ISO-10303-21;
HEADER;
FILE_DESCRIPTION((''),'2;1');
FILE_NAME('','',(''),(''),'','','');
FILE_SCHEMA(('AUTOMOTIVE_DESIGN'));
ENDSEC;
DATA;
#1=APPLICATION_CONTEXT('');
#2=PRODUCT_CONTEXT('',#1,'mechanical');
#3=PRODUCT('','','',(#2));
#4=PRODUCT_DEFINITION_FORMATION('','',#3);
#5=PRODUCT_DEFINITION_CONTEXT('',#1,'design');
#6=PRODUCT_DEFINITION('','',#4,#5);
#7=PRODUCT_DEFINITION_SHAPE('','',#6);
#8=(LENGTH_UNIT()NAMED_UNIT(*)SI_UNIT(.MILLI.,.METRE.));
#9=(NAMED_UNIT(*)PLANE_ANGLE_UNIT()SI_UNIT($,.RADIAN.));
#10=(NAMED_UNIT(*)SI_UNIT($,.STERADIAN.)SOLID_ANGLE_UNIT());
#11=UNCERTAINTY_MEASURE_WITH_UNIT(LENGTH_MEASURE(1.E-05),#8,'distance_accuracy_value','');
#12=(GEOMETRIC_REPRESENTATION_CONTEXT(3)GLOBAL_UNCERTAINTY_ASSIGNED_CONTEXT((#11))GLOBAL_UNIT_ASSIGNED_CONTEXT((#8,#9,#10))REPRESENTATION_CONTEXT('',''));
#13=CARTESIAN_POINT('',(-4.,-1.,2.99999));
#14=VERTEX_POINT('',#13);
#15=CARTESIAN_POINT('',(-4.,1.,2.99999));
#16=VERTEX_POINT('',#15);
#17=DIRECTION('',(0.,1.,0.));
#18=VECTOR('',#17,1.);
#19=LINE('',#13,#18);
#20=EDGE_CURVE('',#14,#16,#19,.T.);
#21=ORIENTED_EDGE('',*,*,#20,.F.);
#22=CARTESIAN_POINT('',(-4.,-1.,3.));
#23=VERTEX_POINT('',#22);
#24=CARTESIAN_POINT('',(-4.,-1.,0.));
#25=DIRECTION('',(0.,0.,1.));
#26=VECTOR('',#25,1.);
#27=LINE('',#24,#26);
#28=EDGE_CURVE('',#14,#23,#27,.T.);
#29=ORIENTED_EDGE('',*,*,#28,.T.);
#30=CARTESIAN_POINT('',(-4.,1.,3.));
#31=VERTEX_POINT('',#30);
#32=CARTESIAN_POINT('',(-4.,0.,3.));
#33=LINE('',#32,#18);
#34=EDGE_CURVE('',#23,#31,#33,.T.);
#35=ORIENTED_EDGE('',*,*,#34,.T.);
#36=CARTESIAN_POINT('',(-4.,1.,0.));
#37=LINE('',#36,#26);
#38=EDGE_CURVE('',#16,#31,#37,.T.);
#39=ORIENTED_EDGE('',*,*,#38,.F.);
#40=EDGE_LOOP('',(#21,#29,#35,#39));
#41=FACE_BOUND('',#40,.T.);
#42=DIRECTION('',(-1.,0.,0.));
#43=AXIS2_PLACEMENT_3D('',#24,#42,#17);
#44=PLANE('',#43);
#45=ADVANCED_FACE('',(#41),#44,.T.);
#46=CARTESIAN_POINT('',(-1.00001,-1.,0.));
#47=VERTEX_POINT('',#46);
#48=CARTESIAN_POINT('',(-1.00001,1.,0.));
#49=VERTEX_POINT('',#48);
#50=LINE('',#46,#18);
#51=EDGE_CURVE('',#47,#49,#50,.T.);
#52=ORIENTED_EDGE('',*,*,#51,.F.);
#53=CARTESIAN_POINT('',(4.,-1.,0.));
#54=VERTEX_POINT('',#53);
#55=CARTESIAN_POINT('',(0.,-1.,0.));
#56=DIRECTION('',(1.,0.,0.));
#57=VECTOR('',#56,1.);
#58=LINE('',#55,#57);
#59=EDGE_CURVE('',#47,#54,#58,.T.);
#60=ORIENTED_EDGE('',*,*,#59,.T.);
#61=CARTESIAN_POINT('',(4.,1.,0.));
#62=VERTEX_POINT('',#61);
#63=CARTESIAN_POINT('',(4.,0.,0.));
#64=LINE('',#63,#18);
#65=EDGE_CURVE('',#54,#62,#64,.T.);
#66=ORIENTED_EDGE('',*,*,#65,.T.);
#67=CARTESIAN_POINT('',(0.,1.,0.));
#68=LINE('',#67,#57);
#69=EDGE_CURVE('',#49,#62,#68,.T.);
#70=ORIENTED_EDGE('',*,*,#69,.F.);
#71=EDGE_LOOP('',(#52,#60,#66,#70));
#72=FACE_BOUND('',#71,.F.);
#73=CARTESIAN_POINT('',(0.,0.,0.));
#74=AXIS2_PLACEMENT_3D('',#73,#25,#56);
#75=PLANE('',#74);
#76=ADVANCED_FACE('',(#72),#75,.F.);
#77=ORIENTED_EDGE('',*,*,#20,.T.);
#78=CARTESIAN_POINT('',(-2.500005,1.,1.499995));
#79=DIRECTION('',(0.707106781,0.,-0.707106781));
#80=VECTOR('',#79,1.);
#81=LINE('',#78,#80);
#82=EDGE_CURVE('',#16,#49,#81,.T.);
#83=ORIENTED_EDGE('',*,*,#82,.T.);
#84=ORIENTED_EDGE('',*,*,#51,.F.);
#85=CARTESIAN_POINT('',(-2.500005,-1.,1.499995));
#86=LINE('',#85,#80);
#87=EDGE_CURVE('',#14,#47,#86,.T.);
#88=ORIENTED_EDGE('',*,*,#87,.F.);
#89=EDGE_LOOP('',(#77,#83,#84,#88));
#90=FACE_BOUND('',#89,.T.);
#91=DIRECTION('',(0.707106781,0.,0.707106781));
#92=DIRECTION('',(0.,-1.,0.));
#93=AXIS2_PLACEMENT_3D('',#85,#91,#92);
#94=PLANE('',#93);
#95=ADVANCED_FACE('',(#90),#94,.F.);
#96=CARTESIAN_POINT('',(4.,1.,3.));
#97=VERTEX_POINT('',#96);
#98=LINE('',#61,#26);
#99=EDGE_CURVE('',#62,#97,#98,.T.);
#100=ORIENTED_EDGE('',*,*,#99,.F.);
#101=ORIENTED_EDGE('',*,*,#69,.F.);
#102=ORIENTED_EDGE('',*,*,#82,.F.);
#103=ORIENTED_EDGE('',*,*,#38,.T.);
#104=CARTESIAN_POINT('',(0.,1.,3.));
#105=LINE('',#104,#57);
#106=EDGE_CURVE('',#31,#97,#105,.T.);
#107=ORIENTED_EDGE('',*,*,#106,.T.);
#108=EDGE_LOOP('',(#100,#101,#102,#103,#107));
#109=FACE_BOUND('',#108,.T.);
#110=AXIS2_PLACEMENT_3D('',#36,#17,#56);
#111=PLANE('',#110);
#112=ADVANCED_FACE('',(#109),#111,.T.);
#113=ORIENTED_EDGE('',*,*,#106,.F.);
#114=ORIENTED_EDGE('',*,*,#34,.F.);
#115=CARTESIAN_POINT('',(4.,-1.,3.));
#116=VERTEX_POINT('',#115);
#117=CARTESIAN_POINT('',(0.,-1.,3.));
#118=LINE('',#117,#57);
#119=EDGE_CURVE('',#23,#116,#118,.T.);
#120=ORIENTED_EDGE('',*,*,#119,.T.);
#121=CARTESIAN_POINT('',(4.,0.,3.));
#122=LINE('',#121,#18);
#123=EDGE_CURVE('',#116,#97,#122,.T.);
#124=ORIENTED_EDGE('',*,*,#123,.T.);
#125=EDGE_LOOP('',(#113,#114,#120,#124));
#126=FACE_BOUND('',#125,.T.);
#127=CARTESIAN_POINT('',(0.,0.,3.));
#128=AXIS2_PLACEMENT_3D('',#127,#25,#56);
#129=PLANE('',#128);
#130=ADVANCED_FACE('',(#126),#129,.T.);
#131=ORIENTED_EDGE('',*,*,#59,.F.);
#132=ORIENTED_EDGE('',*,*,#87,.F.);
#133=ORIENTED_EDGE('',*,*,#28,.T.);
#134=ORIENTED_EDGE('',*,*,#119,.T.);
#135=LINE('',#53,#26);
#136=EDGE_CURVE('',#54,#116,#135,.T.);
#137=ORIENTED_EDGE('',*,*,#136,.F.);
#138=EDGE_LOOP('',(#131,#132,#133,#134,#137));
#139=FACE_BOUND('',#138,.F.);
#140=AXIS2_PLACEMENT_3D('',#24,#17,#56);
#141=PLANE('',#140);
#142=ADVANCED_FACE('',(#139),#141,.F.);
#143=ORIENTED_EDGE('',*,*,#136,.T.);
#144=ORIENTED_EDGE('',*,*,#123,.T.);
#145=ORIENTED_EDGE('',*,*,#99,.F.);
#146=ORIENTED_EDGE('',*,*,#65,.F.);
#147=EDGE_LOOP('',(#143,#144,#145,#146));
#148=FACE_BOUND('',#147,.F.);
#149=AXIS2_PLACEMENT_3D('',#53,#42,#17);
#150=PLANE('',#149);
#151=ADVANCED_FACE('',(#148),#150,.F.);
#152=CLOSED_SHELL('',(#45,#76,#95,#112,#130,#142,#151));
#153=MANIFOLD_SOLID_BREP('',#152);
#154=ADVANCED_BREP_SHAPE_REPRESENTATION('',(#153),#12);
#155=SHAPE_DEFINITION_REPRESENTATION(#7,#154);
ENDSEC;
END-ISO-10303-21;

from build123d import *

# Parameters (mm, degrees)
F0_W     = 8
F0_H     = 2
F1_DEPTH = 3
F2_SIZE  = 2.99999


# Not quite as in the source:
# - a fillet or chamfer is up to 0.001 mm smaller than in the source, because OpenCascade refuses the exact size


with BuildPart() as f1:
    # F0 (on Top) → F1 (new body)
    with BuildSketch(Plane.XY):
        Rectangle(F0_W, F0_H)
    extrude(amount=F1_DEPTH)

    # F2 (size 3 in the source; OpenCascade refuses exactly that, so slightly less here)
    f2_edges = [f1.edges().sort_by_distance(p)[0] for p in [
        (-4, 0, 0),
    ]]
    chamfer(f2_edges, length=F2_SIZE)


solid = f1.part
